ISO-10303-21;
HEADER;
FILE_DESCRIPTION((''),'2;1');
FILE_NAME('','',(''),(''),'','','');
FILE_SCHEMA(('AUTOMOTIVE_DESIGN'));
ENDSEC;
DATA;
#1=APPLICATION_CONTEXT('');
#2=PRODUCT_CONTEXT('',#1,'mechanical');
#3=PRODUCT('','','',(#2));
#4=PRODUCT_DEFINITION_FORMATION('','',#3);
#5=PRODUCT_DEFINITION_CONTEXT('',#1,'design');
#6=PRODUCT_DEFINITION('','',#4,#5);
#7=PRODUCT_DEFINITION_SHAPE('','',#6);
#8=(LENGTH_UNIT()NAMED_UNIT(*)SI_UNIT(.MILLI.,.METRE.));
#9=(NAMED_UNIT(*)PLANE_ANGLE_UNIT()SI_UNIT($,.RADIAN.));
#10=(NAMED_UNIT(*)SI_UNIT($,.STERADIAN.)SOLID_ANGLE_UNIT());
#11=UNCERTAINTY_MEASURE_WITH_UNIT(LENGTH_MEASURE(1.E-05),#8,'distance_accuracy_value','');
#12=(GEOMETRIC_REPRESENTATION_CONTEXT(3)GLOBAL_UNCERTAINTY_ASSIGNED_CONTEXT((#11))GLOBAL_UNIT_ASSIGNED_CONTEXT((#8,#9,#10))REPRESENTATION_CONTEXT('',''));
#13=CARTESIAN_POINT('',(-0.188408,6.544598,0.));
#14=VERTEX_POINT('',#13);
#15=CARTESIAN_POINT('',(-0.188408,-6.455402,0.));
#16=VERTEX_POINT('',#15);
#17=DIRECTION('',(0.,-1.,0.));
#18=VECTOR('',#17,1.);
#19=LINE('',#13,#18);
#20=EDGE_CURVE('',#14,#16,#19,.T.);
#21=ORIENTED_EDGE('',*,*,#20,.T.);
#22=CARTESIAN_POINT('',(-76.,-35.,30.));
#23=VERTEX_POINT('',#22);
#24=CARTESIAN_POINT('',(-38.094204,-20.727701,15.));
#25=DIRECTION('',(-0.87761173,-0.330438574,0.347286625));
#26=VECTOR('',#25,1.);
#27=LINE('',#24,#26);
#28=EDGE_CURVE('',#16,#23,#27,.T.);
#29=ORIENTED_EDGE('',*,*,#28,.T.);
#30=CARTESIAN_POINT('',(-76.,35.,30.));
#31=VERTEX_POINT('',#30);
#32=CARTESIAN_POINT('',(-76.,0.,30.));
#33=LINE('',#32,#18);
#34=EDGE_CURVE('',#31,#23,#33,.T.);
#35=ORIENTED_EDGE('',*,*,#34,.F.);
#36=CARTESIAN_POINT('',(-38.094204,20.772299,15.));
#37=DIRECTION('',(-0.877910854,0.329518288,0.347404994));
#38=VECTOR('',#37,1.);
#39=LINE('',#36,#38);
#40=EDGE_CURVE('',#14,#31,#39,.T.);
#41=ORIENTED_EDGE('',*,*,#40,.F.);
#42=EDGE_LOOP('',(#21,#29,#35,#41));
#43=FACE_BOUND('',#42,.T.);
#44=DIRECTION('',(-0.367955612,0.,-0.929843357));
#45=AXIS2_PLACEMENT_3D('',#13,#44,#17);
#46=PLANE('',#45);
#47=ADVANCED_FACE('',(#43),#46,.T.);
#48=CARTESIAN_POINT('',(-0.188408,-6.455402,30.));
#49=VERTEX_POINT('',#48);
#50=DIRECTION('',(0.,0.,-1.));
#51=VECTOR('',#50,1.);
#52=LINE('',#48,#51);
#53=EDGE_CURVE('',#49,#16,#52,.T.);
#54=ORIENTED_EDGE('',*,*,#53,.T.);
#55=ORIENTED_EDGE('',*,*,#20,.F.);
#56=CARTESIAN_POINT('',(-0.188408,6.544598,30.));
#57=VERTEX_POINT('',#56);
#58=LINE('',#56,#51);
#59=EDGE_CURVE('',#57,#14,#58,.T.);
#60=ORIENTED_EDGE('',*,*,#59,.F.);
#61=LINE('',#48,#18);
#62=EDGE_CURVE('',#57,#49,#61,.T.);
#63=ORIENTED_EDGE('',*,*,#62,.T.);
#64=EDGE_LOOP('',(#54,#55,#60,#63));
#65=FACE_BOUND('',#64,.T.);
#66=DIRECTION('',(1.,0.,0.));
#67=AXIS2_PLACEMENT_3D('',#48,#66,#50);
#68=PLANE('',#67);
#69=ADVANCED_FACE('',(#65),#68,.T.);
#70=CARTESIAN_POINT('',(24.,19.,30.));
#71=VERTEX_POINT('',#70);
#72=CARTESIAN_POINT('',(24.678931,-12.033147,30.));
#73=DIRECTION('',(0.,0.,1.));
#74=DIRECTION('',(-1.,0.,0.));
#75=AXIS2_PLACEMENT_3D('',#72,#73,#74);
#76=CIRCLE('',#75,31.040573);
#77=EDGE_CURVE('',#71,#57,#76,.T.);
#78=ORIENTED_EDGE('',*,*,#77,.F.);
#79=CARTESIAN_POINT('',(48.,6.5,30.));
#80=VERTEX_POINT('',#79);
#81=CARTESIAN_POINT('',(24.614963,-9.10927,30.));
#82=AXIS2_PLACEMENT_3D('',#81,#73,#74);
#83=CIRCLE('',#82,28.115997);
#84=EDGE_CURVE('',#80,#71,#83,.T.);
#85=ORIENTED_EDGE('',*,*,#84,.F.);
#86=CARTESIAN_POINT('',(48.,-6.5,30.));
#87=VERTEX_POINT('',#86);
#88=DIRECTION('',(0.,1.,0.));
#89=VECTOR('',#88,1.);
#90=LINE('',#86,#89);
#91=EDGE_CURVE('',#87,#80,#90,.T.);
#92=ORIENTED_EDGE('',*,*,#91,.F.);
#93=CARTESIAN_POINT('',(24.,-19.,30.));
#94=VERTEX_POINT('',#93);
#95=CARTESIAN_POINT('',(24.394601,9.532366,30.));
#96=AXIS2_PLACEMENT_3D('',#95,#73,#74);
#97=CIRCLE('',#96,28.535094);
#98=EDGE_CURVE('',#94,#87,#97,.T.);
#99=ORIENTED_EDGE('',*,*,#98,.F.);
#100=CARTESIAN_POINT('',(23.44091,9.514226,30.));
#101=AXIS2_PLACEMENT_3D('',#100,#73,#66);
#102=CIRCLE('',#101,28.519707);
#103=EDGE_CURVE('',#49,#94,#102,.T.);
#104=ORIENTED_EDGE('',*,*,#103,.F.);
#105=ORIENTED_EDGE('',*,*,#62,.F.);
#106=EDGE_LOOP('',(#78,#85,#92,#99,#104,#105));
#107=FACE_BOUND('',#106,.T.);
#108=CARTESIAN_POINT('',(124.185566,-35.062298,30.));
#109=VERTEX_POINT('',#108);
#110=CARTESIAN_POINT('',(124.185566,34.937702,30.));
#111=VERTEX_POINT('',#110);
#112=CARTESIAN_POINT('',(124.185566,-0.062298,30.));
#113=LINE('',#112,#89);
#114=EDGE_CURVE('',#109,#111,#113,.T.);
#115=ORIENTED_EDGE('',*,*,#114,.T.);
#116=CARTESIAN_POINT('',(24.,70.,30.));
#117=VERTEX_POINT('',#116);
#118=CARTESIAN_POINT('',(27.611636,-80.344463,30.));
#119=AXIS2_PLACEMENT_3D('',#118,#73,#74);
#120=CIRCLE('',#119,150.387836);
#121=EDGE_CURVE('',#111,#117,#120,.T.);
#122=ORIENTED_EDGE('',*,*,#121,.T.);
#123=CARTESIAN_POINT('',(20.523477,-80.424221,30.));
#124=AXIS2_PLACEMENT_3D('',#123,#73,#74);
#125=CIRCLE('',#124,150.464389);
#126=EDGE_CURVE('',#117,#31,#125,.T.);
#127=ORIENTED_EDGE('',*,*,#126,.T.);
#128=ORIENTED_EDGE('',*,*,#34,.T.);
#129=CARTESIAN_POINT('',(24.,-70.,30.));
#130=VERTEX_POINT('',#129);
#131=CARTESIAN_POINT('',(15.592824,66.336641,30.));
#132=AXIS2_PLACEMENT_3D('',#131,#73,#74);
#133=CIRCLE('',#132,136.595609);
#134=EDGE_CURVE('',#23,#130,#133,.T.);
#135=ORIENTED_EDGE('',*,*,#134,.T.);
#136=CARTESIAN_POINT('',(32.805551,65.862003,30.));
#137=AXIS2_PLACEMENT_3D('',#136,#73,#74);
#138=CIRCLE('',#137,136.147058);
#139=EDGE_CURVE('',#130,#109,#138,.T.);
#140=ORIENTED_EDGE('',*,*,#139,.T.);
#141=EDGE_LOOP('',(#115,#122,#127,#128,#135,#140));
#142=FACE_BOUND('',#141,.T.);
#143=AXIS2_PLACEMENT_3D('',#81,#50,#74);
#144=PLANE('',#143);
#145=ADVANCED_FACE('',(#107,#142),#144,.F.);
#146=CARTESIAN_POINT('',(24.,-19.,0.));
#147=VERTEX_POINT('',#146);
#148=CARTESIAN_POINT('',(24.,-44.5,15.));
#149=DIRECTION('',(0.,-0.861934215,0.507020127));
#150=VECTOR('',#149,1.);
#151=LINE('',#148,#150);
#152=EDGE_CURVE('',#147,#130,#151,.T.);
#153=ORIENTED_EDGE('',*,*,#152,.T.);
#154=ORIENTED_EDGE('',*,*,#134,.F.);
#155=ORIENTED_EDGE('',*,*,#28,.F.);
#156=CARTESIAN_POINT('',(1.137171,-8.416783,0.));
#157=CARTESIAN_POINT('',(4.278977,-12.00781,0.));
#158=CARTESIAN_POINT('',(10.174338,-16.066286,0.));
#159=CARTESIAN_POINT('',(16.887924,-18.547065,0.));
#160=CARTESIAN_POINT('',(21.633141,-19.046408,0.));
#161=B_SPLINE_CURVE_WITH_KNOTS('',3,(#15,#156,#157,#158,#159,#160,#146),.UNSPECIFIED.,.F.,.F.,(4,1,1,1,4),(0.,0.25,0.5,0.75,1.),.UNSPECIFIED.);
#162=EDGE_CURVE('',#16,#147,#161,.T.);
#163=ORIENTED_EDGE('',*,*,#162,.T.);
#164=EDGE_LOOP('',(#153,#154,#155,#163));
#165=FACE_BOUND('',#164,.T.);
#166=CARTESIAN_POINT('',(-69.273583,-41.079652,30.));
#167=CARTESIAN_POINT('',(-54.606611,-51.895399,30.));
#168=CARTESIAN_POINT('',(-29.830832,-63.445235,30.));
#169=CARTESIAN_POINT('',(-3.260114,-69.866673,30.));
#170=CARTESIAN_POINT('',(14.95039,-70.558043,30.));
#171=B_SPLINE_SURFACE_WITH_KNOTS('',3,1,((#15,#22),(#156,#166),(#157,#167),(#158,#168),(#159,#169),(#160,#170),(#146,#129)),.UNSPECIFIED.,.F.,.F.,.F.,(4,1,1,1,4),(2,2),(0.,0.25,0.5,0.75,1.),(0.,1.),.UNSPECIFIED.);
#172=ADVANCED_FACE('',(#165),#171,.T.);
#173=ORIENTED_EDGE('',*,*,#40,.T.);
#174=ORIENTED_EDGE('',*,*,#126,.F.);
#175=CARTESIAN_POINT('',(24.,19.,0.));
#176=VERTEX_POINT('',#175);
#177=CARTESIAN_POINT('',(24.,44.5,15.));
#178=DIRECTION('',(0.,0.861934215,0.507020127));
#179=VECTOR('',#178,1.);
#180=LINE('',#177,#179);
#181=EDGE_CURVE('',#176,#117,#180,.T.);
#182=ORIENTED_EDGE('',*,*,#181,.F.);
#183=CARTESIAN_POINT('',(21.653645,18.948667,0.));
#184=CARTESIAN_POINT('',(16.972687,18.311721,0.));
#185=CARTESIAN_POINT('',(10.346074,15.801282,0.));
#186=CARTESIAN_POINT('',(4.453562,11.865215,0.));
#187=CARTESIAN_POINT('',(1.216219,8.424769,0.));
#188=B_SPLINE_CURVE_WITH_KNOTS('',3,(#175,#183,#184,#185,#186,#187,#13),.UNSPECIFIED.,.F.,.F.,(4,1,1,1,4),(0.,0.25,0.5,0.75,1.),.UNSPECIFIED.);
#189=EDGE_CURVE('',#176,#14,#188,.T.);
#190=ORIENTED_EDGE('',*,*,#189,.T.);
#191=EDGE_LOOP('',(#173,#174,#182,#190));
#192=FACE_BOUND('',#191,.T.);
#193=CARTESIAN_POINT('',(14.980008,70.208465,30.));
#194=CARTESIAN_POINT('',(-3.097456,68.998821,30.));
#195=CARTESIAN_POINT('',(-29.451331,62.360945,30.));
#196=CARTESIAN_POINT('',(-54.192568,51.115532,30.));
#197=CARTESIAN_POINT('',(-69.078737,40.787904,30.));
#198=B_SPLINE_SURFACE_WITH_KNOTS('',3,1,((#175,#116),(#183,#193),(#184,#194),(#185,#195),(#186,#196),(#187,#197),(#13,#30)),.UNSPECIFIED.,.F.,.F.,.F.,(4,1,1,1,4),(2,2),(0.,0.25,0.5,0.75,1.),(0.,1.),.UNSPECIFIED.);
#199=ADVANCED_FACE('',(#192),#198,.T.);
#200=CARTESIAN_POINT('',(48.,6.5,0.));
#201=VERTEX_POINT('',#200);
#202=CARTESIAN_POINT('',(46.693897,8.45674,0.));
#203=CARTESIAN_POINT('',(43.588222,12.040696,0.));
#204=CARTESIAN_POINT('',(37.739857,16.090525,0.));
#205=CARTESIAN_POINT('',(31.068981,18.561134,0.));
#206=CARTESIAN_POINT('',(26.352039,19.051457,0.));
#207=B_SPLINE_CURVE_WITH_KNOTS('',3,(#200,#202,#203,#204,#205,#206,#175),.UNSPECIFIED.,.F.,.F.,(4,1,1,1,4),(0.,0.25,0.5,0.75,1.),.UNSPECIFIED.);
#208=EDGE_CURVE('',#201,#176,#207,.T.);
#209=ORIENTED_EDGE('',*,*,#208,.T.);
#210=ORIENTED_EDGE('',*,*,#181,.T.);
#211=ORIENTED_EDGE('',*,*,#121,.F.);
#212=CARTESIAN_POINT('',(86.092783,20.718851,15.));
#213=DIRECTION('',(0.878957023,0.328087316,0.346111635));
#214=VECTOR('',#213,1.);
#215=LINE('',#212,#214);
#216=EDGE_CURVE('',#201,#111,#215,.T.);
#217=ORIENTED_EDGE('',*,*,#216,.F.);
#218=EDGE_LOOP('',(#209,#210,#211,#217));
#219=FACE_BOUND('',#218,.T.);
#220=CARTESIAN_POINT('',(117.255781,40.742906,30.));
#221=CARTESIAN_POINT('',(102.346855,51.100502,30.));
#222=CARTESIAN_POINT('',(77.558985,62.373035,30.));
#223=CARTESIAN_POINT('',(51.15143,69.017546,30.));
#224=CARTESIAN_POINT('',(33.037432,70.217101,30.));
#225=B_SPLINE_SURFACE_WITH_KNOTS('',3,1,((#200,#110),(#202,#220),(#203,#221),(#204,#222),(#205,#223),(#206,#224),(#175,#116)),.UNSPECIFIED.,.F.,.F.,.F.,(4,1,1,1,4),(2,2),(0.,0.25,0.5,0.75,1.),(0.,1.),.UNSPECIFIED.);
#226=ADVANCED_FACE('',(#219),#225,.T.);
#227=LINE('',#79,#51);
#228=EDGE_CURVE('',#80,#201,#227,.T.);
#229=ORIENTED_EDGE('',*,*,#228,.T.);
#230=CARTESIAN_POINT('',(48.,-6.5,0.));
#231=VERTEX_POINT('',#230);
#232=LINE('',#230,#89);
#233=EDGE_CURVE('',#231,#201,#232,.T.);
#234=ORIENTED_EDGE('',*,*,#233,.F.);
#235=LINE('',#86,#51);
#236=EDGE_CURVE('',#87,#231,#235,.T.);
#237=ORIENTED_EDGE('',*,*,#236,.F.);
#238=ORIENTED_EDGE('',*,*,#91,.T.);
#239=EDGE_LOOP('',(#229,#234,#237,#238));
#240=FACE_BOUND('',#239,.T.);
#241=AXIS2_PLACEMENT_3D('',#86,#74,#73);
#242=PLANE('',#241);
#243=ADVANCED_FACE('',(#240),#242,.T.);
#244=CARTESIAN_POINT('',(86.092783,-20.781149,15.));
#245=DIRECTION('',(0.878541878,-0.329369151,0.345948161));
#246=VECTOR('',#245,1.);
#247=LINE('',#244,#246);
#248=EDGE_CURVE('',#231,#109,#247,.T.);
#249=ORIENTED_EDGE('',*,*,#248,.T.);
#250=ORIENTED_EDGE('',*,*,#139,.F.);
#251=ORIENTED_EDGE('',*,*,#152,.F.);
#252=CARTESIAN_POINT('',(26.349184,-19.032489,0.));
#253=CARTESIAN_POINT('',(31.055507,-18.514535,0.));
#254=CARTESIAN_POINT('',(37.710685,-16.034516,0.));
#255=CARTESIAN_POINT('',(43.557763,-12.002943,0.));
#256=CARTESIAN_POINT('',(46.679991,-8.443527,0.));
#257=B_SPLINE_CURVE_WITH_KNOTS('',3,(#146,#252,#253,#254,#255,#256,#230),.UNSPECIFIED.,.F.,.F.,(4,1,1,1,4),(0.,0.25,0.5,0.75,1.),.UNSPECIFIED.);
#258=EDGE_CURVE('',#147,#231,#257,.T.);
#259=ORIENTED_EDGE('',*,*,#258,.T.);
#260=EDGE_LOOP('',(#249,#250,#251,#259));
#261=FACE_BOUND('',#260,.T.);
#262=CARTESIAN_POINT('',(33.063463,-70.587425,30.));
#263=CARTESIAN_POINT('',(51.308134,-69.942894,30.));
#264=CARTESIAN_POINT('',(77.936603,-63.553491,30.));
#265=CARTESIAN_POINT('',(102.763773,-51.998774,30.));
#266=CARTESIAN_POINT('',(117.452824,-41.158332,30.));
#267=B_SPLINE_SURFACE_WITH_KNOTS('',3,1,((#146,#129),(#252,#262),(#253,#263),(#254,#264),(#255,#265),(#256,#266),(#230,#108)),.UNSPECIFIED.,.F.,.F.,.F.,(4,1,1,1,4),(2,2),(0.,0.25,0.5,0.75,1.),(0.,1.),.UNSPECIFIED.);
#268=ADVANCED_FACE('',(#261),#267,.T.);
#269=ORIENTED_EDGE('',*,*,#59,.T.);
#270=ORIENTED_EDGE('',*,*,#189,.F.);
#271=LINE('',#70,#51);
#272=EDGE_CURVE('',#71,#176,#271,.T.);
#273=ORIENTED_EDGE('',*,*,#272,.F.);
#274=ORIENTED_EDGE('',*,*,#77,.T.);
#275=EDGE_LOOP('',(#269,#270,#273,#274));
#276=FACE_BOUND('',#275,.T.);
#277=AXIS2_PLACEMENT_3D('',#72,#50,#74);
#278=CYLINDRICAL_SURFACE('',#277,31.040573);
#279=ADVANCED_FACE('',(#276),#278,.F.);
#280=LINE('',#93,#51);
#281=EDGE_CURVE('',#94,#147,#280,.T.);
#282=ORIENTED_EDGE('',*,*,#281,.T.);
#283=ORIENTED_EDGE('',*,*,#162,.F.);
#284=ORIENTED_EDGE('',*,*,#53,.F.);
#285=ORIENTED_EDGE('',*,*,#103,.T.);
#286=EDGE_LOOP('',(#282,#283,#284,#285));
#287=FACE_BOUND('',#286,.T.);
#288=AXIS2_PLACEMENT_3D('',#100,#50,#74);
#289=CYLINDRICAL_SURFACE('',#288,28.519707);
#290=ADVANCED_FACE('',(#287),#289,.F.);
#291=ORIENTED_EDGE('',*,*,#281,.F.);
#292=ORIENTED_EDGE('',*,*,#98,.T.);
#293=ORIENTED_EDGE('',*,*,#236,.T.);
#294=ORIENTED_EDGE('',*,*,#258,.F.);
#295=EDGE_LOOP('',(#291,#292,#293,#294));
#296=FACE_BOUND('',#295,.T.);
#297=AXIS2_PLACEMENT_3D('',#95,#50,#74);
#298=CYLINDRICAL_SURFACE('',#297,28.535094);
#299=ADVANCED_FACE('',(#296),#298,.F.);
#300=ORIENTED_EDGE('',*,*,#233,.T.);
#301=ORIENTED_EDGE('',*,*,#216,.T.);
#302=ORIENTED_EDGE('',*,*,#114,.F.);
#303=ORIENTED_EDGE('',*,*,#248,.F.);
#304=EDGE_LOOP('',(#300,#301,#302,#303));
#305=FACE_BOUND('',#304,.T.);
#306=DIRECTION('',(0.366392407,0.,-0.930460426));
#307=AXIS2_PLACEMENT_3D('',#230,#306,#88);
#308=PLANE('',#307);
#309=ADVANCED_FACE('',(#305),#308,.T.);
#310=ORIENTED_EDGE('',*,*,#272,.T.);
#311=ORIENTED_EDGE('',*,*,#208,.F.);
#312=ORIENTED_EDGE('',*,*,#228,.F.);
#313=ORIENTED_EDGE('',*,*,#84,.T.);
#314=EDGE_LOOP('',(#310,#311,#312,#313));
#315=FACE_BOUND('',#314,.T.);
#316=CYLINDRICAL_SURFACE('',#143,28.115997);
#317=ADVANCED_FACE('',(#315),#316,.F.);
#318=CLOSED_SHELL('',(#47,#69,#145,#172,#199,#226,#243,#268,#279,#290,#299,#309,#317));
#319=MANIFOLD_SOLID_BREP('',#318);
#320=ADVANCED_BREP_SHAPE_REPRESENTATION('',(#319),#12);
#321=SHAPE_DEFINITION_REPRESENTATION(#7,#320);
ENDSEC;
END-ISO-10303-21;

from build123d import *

# Parameters (mm, degrees)
BOSS_EXTRUDE1_DEPTH = 30
CUT_EXTRUDE1_DEPTH  = 30


with BuildPart() as part:
    # Sketch1 → Boss-Extrude1 (new body)
    with BuildSketch(Plane.XY):
        with BuildLine():
            Line((48, -6.5), (48, 6.5))
            ThreePointArc((48, 6.5), (37.602709859, 15.827202928), (24, 19))
            ThreePointArc((24, 19), (10.468468753, 15.563590687), (-0.188408081, 6.544598337))
            Line((-0.188408081, 6.544598337), (-0.188408081, -6.455401663))
            ThreePointArc((-0.188408081, -6.455401663), (10.310769364, -15.803220123), (24, -19))
            ThreePointArc((24, -19), (37.575943366, -15.775811264), (48, -6.5))
        make_face()
    extrude(amount=BOSS_EXTRUDE1_DEPTH)

    # Boundary3: read off the stored shape, not the designer's step
    # Boundary3: loft between two sections, ruled curve by curve
    boundary3_from = [
        Edge.make_bspline([(48, 6.5, 0), (46.693896538, 8.456739584, 0), (43.588222449, 12.040695886, 0), (37.739856517, 16.090524514, 0), (31.068980756, 18.561134268, 0), (26.352039165, 19.051456966, 0), (24, 19, 0)], [0, 0, 0, 0, 0.25, 0.5, 0.75, 1, 1, 1, 1], 3),
        Edge.make_bspline([(24, 19, 0), (21.653645041, 18.948667391, 0), (16.972687403, 18.311721244, 0), (10.346073824, 15.801281815, 0), (4.453562487, 11.865214769, 0), (1.216218556, 8.424768713, 0), (-0.188408081, 6.544598337, 0)], [0, 0, 0, 0, 0.25, 0.5, 0.75, 1, 1, 1, 1], 3),
        Edge.make_bspline([(-0.188408081, -6.455401663, 0), (1.137170866, -8.416782752, 0), (4.278977495, -12.007809658, 0), (10.174338056, -16.06628603, 0), (16.887924476, -18.54706494, 0), (21.63314098, -19.046407973, 0), (24, -19, 0)], [0, 0, 0, 0, 0.25, 0.5, 0.75, 1, 1, 1, 1], 3),
        Edge.make_bspline([(24, -19, 0), (26.349184265, -19.032489102, 0), (31.055507038, -18.514535118, 0), (37.710685379, -16.034515927, 0), (43.557763047, -12.002943446, 0), (46.67999094, -8.443527292, 0), (48, -6.5, 0)], [0, 0, 0, 0, 0.25, 0.5, 0.75, 1, 1, 1, 1], 3),
        Edge.make_line((48, -6.5, 0), (48, 6.5, 0)),
        Edge.make_line((-0.188408081, 6.544598337, 0), (-0.188408081, -6.455401663, 0)),
    ]
    boundary3_to = [
        Edge.make_bspline([(124.185565628, 34.937701812, 30), (117.255780953, 40.742906307, 30), (102.346855194, 51.100501773, 30), (77.558985244, 62.373034857, 30), (51.151430185, 69.017546472, 30), (33.037432273, 70.217100876, 30), (24, 70, 30)], [0, 0, 0, 0, 0.25, 0.5, 0.75, 1, 1, 1, 1], 3),
        Edge.make_bspline([(24, 70, 30), (14.980008116, 70.208465144, 30), (-3.097456113, 68.998821472, 30), (-29.451330841, 62.360945259, 30), (-54.192567743, 51.115532402, 30), (-69.078737392, 40.787904216, 30), (-76, 35, 30)], [0, 0, 0, 0, 0.25, 0.5, 0.75, 1, 1, 1, 1], 3),
        Edge.make_bspline([(-76, -35, 30), (-69.273583434, -41.079651781, 30), (-54.606610915, -51.895398982, 30), (-29.830832348, -63.44523528, 30), (-3.260114217, -69.866672826, 30), (14.950390393, -70.55804262, 30), (24, -70, 30)], [0, 0, 0, 0, 0.25, 0.5, 0.75, 1, 1, 1, 1], 3),
        Edge.make_bspline([(24, -70, 30), (33.063463281, -70.587425405, 30), (51.308133618, -69.942893548, 30), (77.936602887, -63.553490812, 30), (102.763772692, -51.998773921, 30), (117.452824487, -41.158332308, 30), (124.185565628, -35.062298188, 30)], [0, 0, 0, 0, 0.25, 0.5, 0.75, 1, 1, 1, 1], 3),
        Edge.make_line((124.185565628, -35.062298188, 30), (124.185565628, 34.937701812, 30)),
        Edge.make_line((-76, 35, 30), (-76, -35, 30)),
    ]
    boundary3 = Solid(Shell([*[Face.make_surface_from_curves(boundary3_from[k], boundary3_to[k]) for k in range(6)], Face(Wire(boundary3_from)), Face(Wire(boundary3_to))]))
    add(boundary3)

    # Sketch4 → Cut-Extrude1 (cut)
    with BuildSketch(Plane.XY):
        with BuildLine():
            Line((48, -6.5), (48, 6.5))
            ThreePointArc((48, 6.5), (37.602709859, 15.827202928), (24, 19))
            ThreePointArc((24, 19), (10.468468753, 15.563590687), (-0.188408081, 6.544598337))
            Line((-0.188408081, 6.544598337), (-0.188408081, -6.455401663))
            ThreePointArc((-0.188408081, -6.455401663), (10.310769364, -15.803220123), (24, -19))
            ThreePointArc((24, -19), (37.575943366, -15.775811264), (48, -6.5))
        make_face()
    extrude(amount=CUT_EXTRUDE1_DEPTH, mode=Mode.SUBTRACT)


solid = part.part
